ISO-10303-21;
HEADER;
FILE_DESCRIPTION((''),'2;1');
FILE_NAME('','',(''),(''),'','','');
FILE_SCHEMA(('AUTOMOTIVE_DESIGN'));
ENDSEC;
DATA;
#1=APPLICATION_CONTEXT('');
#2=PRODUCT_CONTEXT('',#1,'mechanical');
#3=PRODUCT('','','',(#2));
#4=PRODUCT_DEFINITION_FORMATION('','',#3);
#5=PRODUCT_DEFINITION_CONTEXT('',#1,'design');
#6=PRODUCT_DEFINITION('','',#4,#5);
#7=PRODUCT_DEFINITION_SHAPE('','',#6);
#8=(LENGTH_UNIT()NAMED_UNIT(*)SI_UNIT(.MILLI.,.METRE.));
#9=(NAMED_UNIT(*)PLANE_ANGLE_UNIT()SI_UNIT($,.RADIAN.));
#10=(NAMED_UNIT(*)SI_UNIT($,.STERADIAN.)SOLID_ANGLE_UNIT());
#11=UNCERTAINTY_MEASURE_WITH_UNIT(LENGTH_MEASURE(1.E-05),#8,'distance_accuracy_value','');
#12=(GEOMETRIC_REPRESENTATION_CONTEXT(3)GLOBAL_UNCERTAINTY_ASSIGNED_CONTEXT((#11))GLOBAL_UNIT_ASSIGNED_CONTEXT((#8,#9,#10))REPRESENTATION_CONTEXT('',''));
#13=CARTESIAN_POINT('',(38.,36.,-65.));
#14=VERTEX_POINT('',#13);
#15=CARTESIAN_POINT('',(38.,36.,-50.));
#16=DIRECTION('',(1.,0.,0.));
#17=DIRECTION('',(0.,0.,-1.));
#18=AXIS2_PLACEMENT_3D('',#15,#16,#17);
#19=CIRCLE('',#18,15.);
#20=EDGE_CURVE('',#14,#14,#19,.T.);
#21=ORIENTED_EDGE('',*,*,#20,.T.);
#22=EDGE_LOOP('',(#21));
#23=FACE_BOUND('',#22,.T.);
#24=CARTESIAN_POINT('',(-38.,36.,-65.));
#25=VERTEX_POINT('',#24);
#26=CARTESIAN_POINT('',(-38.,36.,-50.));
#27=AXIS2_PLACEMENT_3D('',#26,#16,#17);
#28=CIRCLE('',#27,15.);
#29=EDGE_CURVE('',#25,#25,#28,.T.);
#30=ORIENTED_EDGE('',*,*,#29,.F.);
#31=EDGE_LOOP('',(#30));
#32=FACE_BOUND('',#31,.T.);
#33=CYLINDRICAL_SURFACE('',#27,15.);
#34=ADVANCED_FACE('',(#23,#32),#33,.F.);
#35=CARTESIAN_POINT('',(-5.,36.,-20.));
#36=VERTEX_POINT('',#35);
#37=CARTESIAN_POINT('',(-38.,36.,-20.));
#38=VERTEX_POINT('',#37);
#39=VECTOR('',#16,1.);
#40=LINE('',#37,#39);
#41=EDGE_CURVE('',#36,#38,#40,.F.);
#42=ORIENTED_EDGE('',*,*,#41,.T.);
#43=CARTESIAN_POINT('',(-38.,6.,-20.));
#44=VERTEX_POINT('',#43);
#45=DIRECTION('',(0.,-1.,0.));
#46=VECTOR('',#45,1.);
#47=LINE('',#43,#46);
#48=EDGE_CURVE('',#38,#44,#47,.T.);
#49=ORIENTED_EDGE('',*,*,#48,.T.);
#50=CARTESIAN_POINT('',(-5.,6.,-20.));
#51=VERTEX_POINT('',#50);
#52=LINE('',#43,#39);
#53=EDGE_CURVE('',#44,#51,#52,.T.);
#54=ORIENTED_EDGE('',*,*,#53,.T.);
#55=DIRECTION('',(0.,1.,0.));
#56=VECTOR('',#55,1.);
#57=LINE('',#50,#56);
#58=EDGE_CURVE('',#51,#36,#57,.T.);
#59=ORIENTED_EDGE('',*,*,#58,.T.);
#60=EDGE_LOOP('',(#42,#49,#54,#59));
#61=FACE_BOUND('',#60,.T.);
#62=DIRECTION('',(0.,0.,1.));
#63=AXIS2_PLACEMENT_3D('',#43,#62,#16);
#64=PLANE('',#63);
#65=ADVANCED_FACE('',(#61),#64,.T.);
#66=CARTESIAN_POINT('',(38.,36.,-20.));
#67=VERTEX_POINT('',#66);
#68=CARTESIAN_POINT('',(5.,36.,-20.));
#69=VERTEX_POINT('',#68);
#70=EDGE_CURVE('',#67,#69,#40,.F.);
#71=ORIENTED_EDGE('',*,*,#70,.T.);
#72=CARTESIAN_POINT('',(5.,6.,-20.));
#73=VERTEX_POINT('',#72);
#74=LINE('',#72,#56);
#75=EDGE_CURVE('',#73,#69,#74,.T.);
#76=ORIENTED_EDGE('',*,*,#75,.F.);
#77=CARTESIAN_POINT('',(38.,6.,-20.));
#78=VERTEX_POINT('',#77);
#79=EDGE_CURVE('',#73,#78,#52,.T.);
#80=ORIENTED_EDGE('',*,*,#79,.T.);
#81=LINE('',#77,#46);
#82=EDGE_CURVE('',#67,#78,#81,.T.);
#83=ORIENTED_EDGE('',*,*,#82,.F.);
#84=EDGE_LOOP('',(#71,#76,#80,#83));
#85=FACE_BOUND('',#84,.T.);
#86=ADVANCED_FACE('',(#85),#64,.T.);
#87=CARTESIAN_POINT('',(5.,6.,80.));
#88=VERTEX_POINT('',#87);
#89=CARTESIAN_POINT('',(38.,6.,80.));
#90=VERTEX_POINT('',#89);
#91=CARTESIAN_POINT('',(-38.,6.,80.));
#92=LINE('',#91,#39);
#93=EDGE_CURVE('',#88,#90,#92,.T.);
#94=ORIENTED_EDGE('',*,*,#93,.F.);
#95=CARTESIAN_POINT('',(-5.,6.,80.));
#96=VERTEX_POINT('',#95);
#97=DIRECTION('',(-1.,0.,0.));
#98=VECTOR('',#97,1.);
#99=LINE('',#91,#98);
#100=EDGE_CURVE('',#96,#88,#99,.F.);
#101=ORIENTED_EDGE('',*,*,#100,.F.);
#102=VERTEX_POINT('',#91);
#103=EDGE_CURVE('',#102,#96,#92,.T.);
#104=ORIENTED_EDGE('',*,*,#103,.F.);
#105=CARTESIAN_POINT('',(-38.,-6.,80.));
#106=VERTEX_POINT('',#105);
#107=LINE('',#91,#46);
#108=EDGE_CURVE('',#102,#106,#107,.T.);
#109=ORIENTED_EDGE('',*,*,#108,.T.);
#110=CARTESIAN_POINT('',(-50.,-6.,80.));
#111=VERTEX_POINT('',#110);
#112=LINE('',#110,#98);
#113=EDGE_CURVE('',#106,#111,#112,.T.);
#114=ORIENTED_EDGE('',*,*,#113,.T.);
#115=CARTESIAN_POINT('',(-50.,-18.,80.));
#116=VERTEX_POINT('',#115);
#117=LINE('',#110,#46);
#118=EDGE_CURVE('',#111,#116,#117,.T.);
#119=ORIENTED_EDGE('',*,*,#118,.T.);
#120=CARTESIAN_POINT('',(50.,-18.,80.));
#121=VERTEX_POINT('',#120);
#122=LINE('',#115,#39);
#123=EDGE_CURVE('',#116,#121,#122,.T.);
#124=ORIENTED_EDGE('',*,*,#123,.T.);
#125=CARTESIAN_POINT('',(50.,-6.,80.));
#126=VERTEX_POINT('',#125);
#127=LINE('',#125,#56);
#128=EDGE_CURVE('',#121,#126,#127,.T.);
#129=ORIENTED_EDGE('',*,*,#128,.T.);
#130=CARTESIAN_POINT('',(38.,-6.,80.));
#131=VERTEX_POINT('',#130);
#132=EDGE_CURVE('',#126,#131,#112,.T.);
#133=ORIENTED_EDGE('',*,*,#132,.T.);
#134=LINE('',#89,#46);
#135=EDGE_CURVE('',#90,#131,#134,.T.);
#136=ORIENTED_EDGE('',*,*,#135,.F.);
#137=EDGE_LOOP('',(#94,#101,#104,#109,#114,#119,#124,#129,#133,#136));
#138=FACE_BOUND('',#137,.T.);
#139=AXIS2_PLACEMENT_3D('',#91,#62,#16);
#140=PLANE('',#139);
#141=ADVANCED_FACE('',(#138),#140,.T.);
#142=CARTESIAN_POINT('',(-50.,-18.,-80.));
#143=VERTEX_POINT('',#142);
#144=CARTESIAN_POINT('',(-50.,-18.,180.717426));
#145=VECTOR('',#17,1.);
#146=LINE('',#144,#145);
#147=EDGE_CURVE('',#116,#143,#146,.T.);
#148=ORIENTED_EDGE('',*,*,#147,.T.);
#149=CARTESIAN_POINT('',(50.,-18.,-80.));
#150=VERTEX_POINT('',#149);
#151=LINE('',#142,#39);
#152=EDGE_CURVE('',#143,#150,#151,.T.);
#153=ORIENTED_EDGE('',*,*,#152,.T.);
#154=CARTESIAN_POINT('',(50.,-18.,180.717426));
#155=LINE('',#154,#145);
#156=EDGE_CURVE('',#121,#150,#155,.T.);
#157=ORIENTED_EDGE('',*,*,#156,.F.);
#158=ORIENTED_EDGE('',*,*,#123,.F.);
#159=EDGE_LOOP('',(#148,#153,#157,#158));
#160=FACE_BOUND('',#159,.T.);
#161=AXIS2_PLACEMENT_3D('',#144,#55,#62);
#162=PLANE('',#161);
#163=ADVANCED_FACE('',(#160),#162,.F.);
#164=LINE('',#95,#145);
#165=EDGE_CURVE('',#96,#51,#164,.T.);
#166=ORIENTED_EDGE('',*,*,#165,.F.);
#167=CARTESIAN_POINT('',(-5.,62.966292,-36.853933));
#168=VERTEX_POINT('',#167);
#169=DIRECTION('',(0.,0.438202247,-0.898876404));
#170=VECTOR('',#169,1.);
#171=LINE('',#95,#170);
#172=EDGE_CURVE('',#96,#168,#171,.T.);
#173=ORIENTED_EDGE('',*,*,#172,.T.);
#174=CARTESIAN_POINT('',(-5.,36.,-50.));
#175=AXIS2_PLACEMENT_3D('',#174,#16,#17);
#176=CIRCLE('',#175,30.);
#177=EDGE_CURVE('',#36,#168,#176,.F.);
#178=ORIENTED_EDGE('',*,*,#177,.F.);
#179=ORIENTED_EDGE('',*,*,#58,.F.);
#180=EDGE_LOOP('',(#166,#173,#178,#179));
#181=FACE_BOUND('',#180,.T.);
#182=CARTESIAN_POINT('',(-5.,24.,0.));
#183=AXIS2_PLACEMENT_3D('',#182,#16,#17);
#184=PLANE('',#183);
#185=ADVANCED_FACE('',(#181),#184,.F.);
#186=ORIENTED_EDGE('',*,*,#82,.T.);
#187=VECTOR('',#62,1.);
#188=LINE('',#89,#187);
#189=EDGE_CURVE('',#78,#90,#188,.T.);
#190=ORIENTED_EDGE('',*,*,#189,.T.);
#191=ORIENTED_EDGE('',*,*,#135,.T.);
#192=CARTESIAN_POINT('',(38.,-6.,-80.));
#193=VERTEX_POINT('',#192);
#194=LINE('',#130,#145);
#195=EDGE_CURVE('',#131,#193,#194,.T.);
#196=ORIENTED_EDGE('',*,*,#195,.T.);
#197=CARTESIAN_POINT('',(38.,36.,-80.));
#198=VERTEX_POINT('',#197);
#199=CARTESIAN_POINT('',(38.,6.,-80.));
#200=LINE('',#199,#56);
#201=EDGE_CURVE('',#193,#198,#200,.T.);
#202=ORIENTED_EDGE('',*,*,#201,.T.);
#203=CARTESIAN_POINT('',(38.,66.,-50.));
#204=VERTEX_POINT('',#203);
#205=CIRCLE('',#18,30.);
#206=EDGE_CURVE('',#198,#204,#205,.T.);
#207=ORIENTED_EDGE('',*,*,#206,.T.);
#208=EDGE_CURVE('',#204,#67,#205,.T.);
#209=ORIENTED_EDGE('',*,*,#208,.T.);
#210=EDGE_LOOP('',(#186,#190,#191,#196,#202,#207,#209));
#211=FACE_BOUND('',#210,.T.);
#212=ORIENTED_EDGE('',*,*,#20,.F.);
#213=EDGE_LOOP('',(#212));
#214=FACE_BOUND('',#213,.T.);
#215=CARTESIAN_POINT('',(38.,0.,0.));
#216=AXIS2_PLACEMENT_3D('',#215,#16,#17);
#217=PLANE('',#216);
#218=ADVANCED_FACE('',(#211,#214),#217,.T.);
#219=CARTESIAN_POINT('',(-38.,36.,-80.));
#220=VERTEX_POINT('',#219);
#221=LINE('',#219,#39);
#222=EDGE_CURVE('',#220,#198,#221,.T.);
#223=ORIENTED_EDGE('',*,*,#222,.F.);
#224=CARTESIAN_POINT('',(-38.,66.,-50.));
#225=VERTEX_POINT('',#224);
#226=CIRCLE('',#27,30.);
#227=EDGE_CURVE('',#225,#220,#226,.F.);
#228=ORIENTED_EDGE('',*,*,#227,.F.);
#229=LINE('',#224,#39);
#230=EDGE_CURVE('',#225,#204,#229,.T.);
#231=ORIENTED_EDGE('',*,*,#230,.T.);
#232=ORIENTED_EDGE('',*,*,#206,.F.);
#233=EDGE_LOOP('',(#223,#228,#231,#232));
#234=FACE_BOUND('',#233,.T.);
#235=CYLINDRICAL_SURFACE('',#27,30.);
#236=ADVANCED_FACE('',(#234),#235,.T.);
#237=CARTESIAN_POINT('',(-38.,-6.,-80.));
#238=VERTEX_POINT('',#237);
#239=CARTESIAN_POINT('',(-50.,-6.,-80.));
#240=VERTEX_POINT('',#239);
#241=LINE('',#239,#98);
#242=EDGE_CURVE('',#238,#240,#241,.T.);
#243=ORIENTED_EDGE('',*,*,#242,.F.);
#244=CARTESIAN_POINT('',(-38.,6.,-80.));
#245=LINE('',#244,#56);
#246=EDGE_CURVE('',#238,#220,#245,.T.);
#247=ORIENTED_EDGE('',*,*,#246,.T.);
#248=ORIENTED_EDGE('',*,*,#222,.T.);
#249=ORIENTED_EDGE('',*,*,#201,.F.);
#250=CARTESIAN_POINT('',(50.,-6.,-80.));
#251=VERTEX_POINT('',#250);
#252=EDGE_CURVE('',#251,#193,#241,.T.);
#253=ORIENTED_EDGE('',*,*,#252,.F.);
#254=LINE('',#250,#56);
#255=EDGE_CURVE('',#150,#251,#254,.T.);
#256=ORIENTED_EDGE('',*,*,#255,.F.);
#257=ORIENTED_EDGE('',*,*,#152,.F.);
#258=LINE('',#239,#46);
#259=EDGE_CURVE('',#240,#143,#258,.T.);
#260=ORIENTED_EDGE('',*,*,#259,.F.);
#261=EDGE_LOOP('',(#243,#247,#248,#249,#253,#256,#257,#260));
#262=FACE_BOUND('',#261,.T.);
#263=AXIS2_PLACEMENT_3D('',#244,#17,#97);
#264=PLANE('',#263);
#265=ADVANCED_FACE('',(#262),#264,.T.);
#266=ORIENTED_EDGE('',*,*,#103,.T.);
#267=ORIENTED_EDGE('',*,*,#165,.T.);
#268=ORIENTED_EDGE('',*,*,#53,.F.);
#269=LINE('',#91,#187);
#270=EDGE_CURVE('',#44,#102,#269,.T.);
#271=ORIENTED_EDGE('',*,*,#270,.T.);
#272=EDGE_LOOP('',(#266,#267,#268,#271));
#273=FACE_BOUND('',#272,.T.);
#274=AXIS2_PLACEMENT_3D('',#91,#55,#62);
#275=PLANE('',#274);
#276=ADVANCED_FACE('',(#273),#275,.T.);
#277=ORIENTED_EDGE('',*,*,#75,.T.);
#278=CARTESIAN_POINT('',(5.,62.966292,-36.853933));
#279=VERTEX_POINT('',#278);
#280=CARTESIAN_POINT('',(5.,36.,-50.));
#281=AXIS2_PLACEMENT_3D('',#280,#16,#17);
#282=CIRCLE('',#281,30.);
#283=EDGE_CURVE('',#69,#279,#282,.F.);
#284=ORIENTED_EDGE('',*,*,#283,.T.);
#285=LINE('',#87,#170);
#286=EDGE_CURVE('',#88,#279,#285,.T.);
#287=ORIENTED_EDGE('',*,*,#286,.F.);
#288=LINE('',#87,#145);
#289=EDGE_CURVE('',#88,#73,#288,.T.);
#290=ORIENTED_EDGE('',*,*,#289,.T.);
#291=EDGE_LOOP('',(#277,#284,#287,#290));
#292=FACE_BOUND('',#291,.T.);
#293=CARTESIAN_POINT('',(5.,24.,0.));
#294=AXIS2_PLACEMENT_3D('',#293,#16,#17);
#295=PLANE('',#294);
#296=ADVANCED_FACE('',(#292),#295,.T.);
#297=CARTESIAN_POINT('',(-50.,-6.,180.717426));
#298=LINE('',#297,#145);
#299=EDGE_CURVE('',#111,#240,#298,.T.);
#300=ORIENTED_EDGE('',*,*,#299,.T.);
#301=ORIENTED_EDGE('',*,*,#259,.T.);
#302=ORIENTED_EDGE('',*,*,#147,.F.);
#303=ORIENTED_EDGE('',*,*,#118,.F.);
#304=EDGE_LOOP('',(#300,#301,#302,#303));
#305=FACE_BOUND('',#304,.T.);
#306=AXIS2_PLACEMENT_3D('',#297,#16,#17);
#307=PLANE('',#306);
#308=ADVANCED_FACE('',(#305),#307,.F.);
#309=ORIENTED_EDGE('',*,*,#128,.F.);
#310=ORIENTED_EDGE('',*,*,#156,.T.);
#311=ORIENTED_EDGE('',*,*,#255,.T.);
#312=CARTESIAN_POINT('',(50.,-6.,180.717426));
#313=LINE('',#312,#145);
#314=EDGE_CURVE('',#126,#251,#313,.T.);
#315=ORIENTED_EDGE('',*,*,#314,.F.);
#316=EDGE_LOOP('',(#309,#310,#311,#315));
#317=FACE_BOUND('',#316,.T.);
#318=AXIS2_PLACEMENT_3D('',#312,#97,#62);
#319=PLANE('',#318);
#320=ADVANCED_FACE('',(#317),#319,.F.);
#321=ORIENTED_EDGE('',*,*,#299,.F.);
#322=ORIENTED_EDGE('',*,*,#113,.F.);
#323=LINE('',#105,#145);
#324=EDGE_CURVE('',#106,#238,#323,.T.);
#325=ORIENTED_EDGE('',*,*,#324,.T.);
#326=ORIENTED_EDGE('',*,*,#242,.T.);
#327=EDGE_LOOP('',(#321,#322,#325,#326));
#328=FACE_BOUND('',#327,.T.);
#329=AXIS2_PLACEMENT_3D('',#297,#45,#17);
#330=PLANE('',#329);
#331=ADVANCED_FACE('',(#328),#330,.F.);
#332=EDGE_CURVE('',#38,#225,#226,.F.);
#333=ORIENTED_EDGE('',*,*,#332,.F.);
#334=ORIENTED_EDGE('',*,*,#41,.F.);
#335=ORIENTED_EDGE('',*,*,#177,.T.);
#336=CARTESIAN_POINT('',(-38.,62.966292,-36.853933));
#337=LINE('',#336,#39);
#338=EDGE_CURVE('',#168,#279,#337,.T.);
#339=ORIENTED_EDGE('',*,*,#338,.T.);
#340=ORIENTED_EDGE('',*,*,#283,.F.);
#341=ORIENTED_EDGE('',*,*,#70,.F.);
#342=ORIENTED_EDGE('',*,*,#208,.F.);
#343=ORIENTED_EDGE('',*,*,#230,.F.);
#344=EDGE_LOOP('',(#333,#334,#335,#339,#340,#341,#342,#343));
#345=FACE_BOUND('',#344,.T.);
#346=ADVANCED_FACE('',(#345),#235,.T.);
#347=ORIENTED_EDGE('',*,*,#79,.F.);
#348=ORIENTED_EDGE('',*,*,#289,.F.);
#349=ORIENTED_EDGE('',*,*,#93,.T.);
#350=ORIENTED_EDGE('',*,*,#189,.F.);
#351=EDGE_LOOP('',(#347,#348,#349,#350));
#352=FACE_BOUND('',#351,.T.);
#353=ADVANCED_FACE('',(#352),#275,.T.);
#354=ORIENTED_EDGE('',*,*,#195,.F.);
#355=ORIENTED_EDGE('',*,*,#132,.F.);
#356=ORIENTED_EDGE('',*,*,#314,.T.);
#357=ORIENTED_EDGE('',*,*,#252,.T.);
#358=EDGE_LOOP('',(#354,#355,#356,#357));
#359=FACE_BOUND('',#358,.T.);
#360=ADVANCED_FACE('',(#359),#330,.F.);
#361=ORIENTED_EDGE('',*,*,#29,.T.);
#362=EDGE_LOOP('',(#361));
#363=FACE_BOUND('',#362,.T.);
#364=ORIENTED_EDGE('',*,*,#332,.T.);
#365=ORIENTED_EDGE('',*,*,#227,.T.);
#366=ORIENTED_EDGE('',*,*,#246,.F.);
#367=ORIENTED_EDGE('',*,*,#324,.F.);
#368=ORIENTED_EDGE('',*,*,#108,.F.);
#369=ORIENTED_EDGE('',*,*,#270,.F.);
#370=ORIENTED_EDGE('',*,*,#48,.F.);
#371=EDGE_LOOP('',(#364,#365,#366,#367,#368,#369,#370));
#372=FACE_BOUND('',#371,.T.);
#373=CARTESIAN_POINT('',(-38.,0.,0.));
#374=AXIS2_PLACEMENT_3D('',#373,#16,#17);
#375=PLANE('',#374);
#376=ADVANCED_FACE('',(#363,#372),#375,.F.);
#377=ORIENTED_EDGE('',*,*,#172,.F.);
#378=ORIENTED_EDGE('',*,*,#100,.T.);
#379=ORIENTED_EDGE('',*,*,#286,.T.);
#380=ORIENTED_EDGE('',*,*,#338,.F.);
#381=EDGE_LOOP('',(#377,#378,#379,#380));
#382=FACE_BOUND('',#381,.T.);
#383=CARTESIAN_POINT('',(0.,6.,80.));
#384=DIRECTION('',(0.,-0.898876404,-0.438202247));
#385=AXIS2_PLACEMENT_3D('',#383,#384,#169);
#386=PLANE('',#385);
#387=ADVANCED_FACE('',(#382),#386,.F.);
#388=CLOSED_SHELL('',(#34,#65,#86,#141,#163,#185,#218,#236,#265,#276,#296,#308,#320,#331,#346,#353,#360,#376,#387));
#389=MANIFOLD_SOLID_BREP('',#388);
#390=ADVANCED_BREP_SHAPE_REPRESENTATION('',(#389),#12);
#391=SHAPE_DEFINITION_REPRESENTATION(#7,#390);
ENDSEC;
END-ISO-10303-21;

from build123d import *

# Parameters (mm, degrees)
BOSS_EXTRUDE2_DEPTH             = 38
BOSS_EXTRUDE2_DEPTH_BACK        = 38
FILLET1_R                       = 30
CUT_EXTRUDE1_DEPTH              = 111.453610172
CUT_EXTRUDE1_DEPTH_BACK         = 111.453610172
SKETCH3_R                       = 15
BOSS_EXTRUDE3_REACH             = 112.454
SKETCH5_W                       = 100
SKETCH5_H                       = 12
BOSS_EXTRUDE3_DIRECTION_2_REACH = 112.454
RIB1_REACH                      = 117.135
SKETCH7_WALL_W                  = 362.269405062
SKETCH7_WALL_H                  = 10


with BuildPart() as part:
    # Sketch2 → Boss-Extrude2 (new, two sides: drawn at the far end of the back side and taken through both)
    with BuildSketch(Plane(origin=(0, 0, 0), x_dir=(0, 0, -1), z_dir=(1, 0, 0)).offset(-BOSS_EXTRUDE2_DEPTH_BACK)):
        Polygon((-80, 6), (20, 6), (20, 66), (80, 66), (80, 6), (80, -6), (-80, -6), align=None)
    extrude(amount=BOSS_EXTRUDE2_DEPTH + BOSS_EXTRUDE2_DEPTH_BACK)

    # Fillet1
    fillet1_edges = [part.edges().sort_by_distance(p)[0] for p in [
        (0, 66, -80),
        (0, 66, -20),
    ]]
    fillet(fillet1_edges, radius=FILLET1_R - 0.0001)  # a hair under: the kernel refuses the full size

    # Sketch3 → Cut-Extrude1 (cut, two sides: drawn at the far end of the back side and taken through both)
    with BuildSketch(Plane(origin=(0, 0, 0), x_dir=(0, 0, -1), z_dir=(1, 0, 0)).offset(-CUT_EXTRUDE1_DEPTH_BACK)):
        with Locations((50, 36)):
            Circle(SKETCH3_R)
    extrude(amount=CUT_EXTRUDE1_DEPTH + CUT_EXTRUDE1_DEPTH_BACK, mode=Mode.SUBTRACT)

    # Boss-Extrude3: up to this face of the body (flat: up to its plane)
    boss_extrude3_end = Plane(part.part.faces().sort_by_distance((0, 0, 80))[0])
    # Sketch5 → Boss-Extrude3 (add, up to the picked face)
    with BuildSketch(Plane.XY, mode=Mode.PRIVATE) as boss_extrude3_sk1:
        with Locations((0, -12)):
            Rectangle(SKETCH5_W, SKETCH5_H)
    boss_extrude3_tool1 = split(extrude(boss_extrude3_sk1.sketch, amount=BOSS_EXTRUDE3_REACH, mode=Mode.PRIVATE), bisect_by=boss_extrude3_end, keep=Keep.BOTH, mode=Mode.PRIVATE)
    add(boss_extrude3_tool1.solids().sort_by(Axis((0, -12, 0), (0, 0, 1)))[0])

    # Boss-Extrude3 direction 2: up to this face of the body (flat: up to its plane)
    boss_extrude3_direction_2_end = Plane(part.part.faces().sort_by_distance((0, 15.00005, -80))[0])
    # Sketch5 → Boss-Extrude3 direction 2 (add, up to the picked face)
    with BuildSketch(Plane.XY, mode=Mode.PRIVATE) as boss_extrude3_direction_2_sk1:
        with Locations((0, -12)):
            Rectangle(SKETCH5_W, SKETCH5_H)
    boss_extrude3_direction_2_tool1 = split(extrude(boss_extrude3_direction_2_sk1.sketch, amount=-BOSS_EXTRUDE3_DIRECTION_2_REACH, mode=Mode.PRIVATE), bisect_by=boss_extrude3_direction_2_end, keep=Keep.BOTH, mode=Mode.PRIVATE)
    add(boss_extrude3_direction_2_tool1.solids().sort_by(Axis((0, -12, 0), (0, 0, -1)))[0])

    # Sketch7 wall → Rib1 (add, up to next)
    with BuildSketch(Plane(origin=(0, 34.483145548, 21.573034774), x_dir=(0, 0.438202247192, -0.898876404494), z_dir=(0, 0.898876404494, 0.438202247192)), mode=Mode.PRIVATE) as rib1_sk1:
        Rectangle(SKETCH7_WALL_W, SKETCH7_WALL_H)
    rib1_tool1 = extrude(rib1_sk1.sketch, amount=-RIB1_REACH, mode=Mode.PRIVATE) - part.part
    add(rib1_tool1.solids().sort_by_distance((0, 34.483145548, 21.573034774))[0])


solid = part.part
